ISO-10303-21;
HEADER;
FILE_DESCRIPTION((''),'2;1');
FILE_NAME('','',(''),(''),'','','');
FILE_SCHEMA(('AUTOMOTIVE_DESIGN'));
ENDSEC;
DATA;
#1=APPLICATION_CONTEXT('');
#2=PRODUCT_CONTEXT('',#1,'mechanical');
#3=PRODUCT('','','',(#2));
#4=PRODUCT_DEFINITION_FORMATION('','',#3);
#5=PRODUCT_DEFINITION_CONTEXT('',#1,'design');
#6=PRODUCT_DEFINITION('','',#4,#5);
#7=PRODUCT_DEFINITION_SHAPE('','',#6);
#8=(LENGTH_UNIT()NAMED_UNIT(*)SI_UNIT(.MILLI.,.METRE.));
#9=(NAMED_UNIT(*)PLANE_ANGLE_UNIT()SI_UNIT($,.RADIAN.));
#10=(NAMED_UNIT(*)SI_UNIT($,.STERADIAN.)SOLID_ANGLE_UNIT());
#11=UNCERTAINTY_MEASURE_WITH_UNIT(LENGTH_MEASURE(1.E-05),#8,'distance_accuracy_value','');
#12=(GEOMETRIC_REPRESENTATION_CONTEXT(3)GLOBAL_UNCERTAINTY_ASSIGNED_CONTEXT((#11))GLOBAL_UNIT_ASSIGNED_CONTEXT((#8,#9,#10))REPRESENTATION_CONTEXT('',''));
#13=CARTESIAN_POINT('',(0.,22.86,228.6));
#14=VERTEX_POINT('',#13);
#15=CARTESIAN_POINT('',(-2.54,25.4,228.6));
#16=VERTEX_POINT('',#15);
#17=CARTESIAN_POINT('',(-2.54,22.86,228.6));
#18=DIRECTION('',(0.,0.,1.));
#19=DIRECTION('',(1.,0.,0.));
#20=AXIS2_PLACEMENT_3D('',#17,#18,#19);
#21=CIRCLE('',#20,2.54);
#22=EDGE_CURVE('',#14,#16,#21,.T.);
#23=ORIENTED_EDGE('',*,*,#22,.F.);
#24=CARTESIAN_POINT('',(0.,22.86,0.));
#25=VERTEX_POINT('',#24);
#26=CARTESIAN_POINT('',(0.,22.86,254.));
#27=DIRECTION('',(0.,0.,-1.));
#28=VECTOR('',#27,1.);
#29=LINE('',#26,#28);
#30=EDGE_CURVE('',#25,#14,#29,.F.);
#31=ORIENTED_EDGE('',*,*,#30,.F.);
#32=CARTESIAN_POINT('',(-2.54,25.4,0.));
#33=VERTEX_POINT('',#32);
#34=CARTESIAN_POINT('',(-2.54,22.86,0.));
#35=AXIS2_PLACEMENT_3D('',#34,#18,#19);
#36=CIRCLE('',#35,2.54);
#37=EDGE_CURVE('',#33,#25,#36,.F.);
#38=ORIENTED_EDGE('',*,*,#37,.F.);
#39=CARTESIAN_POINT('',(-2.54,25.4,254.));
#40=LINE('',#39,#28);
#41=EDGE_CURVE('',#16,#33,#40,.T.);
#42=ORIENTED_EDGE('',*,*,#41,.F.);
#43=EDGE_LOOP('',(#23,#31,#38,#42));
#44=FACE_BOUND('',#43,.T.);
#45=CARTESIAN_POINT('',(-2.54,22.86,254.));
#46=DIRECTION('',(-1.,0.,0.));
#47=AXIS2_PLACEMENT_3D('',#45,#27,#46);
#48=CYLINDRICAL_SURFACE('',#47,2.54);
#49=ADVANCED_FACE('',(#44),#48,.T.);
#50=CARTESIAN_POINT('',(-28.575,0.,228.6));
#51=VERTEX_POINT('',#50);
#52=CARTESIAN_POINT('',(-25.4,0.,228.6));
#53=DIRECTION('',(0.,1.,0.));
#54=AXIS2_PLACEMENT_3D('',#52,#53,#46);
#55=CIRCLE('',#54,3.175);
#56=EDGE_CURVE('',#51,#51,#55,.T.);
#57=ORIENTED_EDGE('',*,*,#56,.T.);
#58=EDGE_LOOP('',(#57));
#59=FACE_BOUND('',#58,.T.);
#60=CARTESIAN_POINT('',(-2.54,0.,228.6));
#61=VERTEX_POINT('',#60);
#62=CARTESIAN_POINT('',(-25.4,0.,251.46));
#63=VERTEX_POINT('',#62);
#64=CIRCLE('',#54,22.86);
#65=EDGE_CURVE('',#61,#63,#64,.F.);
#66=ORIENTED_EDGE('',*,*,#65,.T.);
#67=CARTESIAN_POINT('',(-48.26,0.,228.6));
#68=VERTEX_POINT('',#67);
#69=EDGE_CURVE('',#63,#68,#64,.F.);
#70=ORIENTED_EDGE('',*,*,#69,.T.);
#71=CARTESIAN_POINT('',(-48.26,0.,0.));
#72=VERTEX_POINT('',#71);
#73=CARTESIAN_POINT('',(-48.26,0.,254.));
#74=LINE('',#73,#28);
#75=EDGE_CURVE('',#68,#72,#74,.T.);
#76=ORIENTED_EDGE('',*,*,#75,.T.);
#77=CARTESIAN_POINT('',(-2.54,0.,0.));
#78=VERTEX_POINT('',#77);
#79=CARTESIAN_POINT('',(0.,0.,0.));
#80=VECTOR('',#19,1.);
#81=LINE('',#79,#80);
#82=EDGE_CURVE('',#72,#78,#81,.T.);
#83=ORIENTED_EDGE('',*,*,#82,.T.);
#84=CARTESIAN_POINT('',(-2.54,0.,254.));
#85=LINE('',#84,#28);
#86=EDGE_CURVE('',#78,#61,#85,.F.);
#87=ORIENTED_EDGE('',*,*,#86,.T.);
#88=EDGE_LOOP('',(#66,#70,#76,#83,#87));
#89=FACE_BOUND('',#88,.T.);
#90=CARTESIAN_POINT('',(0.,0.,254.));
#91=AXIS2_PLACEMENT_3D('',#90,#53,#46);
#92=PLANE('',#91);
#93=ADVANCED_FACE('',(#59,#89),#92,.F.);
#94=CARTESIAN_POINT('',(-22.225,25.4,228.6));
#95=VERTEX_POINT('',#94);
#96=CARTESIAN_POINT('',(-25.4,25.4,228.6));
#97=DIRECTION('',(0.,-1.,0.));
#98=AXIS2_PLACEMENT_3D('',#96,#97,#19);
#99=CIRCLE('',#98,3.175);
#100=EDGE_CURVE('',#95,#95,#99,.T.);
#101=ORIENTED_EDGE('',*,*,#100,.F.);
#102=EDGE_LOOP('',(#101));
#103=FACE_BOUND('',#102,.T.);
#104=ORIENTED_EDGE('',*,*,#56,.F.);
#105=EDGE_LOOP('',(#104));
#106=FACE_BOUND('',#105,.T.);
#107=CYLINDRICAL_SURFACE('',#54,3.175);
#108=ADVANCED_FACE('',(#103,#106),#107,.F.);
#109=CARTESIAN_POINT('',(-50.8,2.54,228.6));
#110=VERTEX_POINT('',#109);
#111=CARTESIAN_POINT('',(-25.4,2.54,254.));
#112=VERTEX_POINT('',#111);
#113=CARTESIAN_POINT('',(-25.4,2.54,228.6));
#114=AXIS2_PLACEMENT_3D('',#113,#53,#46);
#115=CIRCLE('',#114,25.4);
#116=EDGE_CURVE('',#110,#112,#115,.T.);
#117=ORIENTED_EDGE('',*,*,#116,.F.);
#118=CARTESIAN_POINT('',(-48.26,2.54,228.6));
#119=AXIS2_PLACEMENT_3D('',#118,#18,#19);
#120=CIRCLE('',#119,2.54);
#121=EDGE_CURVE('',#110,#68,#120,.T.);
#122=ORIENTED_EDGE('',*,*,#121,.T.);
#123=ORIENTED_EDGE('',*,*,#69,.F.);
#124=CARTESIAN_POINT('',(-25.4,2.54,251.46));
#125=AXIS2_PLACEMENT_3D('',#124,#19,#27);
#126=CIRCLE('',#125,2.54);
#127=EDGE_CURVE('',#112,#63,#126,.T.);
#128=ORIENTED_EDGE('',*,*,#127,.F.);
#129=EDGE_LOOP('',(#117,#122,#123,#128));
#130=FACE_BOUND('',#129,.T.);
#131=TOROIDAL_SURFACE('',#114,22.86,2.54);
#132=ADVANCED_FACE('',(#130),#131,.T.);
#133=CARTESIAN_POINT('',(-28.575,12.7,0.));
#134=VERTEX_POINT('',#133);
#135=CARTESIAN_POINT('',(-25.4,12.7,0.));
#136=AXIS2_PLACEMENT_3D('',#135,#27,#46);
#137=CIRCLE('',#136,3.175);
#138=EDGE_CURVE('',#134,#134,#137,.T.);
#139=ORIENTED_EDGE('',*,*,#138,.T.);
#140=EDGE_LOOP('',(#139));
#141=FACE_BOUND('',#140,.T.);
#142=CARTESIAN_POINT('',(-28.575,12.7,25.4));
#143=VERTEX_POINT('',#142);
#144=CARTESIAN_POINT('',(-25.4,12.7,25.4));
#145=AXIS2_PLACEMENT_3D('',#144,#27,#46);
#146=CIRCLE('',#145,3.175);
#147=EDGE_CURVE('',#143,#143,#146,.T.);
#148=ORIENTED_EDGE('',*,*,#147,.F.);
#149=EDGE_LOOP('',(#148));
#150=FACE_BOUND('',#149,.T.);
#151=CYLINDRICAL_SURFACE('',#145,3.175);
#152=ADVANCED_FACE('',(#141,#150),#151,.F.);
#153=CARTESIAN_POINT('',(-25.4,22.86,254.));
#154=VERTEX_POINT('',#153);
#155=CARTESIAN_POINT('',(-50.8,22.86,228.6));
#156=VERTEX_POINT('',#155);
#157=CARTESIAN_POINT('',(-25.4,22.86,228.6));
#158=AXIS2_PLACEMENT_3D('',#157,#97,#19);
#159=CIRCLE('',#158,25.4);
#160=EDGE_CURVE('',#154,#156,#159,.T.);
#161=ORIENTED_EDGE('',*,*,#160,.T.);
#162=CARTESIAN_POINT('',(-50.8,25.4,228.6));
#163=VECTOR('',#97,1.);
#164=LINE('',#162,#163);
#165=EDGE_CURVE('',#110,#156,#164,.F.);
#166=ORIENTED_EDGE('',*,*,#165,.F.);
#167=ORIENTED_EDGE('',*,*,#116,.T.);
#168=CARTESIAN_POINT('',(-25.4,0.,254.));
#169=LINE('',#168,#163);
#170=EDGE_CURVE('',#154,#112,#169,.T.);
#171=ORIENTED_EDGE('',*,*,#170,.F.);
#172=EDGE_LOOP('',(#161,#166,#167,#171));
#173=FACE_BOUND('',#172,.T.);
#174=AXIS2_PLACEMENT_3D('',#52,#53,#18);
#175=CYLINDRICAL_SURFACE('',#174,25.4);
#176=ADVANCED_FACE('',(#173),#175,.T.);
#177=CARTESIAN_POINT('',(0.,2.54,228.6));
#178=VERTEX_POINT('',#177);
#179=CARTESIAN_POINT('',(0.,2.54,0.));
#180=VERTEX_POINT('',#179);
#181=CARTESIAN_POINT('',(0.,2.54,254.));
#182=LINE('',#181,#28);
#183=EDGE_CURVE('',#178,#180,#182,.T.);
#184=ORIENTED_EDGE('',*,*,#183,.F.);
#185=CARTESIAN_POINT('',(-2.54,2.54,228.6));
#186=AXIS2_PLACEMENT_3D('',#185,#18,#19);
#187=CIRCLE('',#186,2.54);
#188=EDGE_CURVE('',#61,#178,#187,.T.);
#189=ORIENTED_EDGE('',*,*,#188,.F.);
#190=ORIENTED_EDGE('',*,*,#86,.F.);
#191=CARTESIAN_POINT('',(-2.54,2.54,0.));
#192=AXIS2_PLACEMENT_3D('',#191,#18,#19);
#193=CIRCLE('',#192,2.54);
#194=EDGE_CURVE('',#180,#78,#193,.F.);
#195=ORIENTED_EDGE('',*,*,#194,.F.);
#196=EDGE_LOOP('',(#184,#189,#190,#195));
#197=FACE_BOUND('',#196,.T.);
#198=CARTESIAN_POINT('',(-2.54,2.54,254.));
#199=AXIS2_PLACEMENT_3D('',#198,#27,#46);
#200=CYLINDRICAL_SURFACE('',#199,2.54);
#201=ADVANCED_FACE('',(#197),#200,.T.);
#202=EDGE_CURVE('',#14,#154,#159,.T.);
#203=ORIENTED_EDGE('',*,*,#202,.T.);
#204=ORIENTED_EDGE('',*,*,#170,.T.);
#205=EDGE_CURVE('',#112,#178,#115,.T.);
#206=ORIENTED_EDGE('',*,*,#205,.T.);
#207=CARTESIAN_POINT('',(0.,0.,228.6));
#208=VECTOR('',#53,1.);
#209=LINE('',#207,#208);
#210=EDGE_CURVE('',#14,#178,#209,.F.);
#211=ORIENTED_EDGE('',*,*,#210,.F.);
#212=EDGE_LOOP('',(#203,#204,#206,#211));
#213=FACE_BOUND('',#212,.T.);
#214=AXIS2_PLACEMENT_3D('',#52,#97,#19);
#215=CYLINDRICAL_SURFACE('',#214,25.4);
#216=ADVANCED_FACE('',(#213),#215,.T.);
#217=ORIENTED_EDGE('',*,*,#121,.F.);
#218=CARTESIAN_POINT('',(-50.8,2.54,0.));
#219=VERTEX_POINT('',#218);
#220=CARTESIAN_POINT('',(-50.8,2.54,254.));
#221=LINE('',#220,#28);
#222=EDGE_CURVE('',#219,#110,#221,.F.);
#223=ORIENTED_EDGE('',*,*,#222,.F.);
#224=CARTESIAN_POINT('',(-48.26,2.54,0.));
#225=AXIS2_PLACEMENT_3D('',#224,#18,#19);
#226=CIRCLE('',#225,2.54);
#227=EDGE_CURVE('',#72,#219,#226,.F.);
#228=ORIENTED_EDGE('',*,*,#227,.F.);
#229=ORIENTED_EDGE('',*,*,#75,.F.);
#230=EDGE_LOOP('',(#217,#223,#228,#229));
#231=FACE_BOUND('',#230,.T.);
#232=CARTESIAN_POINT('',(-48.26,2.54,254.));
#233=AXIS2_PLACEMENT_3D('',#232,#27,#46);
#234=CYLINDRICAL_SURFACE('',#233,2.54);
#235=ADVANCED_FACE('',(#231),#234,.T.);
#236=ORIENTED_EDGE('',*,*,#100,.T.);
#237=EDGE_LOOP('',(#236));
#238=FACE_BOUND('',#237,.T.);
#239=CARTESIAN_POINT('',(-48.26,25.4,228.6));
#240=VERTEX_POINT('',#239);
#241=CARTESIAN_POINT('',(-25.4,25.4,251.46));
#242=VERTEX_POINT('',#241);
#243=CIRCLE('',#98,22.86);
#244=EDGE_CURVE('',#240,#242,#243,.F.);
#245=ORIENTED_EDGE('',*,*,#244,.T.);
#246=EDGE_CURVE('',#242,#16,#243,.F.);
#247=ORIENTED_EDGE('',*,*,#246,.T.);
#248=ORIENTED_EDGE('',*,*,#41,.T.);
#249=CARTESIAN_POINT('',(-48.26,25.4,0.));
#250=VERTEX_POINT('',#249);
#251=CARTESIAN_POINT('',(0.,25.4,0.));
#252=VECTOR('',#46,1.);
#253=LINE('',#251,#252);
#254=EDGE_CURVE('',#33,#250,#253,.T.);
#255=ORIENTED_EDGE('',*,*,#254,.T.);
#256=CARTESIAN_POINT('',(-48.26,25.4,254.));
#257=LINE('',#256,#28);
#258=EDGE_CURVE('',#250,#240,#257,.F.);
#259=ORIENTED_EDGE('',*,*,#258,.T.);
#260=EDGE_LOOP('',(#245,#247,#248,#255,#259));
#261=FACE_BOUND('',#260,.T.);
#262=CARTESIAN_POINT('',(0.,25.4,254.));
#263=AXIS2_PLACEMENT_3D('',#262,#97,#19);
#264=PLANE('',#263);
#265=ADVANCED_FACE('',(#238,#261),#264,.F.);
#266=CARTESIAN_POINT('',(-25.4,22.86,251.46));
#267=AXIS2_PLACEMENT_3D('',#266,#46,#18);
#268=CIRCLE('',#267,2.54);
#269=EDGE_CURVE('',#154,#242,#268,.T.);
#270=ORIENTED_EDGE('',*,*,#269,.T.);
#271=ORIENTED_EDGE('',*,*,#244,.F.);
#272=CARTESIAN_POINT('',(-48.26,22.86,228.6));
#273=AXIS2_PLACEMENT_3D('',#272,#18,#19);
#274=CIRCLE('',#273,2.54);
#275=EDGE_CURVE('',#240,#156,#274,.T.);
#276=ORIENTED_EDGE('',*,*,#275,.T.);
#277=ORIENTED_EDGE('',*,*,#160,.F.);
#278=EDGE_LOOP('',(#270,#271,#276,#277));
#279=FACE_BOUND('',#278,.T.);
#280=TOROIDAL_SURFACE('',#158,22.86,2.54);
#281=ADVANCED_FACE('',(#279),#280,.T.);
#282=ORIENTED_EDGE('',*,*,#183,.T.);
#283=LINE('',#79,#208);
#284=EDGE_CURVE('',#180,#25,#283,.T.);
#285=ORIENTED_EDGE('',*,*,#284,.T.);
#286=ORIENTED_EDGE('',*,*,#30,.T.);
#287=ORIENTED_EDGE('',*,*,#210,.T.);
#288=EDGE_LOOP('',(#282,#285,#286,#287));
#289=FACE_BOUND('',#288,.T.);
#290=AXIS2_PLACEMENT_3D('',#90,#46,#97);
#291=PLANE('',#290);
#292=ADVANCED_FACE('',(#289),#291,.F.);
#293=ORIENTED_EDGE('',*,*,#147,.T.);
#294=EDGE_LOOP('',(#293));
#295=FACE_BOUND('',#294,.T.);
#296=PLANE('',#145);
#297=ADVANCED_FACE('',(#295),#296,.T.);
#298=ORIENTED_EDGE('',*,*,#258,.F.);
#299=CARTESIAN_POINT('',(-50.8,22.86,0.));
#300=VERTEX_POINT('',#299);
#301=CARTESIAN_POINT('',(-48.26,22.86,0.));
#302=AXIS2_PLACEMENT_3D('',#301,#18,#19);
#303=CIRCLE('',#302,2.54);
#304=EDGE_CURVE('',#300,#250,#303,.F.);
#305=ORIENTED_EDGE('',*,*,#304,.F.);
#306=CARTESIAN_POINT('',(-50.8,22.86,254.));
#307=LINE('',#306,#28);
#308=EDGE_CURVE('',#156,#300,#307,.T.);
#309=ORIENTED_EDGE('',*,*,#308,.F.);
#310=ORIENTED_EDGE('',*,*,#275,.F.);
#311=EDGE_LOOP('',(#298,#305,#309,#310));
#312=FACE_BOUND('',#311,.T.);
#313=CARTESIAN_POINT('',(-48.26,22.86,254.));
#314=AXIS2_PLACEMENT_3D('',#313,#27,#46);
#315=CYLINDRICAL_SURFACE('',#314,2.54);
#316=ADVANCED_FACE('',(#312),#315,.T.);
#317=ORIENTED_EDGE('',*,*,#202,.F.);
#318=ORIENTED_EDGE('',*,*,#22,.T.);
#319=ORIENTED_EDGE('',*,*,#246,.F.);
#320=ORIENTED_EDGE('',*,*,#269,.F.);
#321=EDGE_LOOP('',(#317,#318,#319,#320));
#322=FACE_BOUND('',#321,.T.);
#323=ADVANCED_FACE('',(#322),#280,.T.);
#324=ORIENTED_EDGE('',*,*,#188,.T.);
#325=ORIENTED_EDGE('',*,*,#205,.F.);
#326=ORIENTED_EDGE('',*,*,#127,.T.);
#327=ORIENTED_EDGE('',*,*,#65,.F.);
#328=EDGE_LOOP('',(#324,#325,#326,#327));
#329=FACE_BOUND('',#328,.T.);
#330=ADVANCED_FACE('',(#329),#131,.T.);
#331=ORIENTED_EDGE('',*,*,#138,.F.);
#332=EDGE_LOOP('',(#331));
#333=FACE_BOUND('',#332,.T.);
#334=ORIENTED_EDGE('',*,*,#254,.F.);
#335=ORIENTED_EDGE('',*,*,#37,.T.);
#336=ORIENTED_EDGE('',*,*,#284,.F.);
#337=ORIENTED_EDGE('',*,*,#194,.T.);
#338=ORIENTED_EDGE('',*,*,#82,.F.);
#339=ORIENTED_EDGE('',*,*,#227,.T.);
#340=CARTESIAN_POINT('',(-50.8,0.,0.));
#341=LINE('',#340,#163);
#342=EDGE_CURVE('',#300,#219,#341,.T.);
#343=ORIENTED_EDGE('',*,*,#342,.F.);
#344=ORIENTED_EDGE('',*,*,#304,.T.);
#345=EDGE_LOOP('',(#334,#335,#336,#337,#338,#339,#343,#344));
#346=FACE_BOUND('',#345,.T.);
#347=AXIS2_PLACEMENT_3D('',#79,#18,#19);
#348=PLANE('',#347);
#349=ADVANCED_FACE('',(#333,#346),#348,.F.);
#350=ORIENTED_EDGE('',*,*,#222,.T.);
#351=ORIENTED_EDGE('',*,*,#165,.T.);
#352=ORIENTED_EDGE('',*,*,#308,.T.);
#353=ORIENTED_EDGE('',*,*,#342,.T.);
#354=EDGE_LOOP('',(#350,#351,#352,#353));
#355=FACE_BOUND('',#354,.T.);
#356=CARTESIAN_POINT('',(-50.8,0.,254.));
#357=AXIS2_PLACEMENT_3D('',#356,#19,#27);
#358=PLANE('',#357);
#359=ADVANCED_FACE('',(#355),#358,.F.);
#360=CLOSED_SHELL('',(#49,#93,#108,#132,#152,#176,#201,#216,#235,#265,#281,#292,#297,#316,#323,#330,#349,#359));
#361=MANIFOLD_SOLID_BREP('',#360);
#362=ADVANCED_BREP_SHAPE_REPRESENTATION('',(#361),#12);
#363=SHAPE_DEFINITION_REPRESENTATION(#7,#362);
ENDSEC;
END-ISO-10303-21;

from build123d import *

# Parameters (mm, degrees)
SKETCH1_W               = 50.8
SKETCH1_H               = 25.4
BOSS_EXTRUDE1_DEPTH     = 254
SKETCH2_R               = 3.175
CUT_EXTRUDE1_DEPTH      = 25.4
FILLET2_R               = 25.4
FILLET1_R               = 2.54
CUT_EXTRUDE2_DEPTH      = 261.272549455
CUT_EXTRUDE2_DEPTH_BACK = 261.272549455
SKETCH3_R               = 3.175


with BuildPart() as part:
    # Sketch1 → Boss-Extrude1 (new body)
    with BuildSketch(Plane.XY):
        with Locations((-25.4, 12.7)):
            Rectangle(SKETCH1_W, SKETCH1_H)
    extrude(amount=BOSS_EXTRUDE1_DEPTH)

    # Sketch2 → Cut-Extrude1 (cut)
    with BuildSketch(Plane(origin=(0, 0, 0), x_dir=(-1, 0, 0), z_dir=(0, 0, -1))):
        with Locations((25.4, 12.7)):
            Circle(SKETCH2_R)
    extrude(amount=-CUT_EXTRUDE1_DEPTH, mode=Mode.SUBTRACT)

    # Fillet2
    fillet2_edges = [part.edges().sort_by_distance(p)[0] for p in [
        (0, 12.7, 254),
        (-50.8, 12.7, 254),
    ]]
    fillet(fillet2_edges, radius=FILLET2_R - 0.0001)  # a hair under: the kernel refuses the full size

    # Fillet1
    fillet1_edges = [part.edges().sort_by_distance(p)[0] for p in [
        (-50.8, 25.4, 114.30005),
        (0, 25.4, 114.30005),
        (-43.360541531, 25.4, 246.560541531),
        (-7.439458469, 25.4, 246.560541531),
        (0, 0, 114.30005),
        (-50.8, 0, 114.30005),
        (-43.360541531, 0, 246.560541531),
        (-7.439458469, 0, 246.560541531),
    ]]
    fillet(fillet1_edges, radius=FILLET1_R)

    # Sketch3 → Cut-Extrude2 (cut, two sides: drawn at the far end of the back side and taken through both)
    with BuildSketch(Plane(origin=(0, 25.4, 0), x_dir=(1, 0, 0), z_dir=(0, 1, 0)).offset(-CUT_EXTRUDE2_DEPTH_BACK)):
        with Locations(Location((-25.4, -228.6, 0), (0, 0, 180))):
            Circle(SKETCH3_R)
    extrude(amount=CUT_EXTRUDE2_DEPTH + CUT_EXTRUDE2_DEPTH_BACK, mode=Mode.SUBTRACT)


solid = part.part
